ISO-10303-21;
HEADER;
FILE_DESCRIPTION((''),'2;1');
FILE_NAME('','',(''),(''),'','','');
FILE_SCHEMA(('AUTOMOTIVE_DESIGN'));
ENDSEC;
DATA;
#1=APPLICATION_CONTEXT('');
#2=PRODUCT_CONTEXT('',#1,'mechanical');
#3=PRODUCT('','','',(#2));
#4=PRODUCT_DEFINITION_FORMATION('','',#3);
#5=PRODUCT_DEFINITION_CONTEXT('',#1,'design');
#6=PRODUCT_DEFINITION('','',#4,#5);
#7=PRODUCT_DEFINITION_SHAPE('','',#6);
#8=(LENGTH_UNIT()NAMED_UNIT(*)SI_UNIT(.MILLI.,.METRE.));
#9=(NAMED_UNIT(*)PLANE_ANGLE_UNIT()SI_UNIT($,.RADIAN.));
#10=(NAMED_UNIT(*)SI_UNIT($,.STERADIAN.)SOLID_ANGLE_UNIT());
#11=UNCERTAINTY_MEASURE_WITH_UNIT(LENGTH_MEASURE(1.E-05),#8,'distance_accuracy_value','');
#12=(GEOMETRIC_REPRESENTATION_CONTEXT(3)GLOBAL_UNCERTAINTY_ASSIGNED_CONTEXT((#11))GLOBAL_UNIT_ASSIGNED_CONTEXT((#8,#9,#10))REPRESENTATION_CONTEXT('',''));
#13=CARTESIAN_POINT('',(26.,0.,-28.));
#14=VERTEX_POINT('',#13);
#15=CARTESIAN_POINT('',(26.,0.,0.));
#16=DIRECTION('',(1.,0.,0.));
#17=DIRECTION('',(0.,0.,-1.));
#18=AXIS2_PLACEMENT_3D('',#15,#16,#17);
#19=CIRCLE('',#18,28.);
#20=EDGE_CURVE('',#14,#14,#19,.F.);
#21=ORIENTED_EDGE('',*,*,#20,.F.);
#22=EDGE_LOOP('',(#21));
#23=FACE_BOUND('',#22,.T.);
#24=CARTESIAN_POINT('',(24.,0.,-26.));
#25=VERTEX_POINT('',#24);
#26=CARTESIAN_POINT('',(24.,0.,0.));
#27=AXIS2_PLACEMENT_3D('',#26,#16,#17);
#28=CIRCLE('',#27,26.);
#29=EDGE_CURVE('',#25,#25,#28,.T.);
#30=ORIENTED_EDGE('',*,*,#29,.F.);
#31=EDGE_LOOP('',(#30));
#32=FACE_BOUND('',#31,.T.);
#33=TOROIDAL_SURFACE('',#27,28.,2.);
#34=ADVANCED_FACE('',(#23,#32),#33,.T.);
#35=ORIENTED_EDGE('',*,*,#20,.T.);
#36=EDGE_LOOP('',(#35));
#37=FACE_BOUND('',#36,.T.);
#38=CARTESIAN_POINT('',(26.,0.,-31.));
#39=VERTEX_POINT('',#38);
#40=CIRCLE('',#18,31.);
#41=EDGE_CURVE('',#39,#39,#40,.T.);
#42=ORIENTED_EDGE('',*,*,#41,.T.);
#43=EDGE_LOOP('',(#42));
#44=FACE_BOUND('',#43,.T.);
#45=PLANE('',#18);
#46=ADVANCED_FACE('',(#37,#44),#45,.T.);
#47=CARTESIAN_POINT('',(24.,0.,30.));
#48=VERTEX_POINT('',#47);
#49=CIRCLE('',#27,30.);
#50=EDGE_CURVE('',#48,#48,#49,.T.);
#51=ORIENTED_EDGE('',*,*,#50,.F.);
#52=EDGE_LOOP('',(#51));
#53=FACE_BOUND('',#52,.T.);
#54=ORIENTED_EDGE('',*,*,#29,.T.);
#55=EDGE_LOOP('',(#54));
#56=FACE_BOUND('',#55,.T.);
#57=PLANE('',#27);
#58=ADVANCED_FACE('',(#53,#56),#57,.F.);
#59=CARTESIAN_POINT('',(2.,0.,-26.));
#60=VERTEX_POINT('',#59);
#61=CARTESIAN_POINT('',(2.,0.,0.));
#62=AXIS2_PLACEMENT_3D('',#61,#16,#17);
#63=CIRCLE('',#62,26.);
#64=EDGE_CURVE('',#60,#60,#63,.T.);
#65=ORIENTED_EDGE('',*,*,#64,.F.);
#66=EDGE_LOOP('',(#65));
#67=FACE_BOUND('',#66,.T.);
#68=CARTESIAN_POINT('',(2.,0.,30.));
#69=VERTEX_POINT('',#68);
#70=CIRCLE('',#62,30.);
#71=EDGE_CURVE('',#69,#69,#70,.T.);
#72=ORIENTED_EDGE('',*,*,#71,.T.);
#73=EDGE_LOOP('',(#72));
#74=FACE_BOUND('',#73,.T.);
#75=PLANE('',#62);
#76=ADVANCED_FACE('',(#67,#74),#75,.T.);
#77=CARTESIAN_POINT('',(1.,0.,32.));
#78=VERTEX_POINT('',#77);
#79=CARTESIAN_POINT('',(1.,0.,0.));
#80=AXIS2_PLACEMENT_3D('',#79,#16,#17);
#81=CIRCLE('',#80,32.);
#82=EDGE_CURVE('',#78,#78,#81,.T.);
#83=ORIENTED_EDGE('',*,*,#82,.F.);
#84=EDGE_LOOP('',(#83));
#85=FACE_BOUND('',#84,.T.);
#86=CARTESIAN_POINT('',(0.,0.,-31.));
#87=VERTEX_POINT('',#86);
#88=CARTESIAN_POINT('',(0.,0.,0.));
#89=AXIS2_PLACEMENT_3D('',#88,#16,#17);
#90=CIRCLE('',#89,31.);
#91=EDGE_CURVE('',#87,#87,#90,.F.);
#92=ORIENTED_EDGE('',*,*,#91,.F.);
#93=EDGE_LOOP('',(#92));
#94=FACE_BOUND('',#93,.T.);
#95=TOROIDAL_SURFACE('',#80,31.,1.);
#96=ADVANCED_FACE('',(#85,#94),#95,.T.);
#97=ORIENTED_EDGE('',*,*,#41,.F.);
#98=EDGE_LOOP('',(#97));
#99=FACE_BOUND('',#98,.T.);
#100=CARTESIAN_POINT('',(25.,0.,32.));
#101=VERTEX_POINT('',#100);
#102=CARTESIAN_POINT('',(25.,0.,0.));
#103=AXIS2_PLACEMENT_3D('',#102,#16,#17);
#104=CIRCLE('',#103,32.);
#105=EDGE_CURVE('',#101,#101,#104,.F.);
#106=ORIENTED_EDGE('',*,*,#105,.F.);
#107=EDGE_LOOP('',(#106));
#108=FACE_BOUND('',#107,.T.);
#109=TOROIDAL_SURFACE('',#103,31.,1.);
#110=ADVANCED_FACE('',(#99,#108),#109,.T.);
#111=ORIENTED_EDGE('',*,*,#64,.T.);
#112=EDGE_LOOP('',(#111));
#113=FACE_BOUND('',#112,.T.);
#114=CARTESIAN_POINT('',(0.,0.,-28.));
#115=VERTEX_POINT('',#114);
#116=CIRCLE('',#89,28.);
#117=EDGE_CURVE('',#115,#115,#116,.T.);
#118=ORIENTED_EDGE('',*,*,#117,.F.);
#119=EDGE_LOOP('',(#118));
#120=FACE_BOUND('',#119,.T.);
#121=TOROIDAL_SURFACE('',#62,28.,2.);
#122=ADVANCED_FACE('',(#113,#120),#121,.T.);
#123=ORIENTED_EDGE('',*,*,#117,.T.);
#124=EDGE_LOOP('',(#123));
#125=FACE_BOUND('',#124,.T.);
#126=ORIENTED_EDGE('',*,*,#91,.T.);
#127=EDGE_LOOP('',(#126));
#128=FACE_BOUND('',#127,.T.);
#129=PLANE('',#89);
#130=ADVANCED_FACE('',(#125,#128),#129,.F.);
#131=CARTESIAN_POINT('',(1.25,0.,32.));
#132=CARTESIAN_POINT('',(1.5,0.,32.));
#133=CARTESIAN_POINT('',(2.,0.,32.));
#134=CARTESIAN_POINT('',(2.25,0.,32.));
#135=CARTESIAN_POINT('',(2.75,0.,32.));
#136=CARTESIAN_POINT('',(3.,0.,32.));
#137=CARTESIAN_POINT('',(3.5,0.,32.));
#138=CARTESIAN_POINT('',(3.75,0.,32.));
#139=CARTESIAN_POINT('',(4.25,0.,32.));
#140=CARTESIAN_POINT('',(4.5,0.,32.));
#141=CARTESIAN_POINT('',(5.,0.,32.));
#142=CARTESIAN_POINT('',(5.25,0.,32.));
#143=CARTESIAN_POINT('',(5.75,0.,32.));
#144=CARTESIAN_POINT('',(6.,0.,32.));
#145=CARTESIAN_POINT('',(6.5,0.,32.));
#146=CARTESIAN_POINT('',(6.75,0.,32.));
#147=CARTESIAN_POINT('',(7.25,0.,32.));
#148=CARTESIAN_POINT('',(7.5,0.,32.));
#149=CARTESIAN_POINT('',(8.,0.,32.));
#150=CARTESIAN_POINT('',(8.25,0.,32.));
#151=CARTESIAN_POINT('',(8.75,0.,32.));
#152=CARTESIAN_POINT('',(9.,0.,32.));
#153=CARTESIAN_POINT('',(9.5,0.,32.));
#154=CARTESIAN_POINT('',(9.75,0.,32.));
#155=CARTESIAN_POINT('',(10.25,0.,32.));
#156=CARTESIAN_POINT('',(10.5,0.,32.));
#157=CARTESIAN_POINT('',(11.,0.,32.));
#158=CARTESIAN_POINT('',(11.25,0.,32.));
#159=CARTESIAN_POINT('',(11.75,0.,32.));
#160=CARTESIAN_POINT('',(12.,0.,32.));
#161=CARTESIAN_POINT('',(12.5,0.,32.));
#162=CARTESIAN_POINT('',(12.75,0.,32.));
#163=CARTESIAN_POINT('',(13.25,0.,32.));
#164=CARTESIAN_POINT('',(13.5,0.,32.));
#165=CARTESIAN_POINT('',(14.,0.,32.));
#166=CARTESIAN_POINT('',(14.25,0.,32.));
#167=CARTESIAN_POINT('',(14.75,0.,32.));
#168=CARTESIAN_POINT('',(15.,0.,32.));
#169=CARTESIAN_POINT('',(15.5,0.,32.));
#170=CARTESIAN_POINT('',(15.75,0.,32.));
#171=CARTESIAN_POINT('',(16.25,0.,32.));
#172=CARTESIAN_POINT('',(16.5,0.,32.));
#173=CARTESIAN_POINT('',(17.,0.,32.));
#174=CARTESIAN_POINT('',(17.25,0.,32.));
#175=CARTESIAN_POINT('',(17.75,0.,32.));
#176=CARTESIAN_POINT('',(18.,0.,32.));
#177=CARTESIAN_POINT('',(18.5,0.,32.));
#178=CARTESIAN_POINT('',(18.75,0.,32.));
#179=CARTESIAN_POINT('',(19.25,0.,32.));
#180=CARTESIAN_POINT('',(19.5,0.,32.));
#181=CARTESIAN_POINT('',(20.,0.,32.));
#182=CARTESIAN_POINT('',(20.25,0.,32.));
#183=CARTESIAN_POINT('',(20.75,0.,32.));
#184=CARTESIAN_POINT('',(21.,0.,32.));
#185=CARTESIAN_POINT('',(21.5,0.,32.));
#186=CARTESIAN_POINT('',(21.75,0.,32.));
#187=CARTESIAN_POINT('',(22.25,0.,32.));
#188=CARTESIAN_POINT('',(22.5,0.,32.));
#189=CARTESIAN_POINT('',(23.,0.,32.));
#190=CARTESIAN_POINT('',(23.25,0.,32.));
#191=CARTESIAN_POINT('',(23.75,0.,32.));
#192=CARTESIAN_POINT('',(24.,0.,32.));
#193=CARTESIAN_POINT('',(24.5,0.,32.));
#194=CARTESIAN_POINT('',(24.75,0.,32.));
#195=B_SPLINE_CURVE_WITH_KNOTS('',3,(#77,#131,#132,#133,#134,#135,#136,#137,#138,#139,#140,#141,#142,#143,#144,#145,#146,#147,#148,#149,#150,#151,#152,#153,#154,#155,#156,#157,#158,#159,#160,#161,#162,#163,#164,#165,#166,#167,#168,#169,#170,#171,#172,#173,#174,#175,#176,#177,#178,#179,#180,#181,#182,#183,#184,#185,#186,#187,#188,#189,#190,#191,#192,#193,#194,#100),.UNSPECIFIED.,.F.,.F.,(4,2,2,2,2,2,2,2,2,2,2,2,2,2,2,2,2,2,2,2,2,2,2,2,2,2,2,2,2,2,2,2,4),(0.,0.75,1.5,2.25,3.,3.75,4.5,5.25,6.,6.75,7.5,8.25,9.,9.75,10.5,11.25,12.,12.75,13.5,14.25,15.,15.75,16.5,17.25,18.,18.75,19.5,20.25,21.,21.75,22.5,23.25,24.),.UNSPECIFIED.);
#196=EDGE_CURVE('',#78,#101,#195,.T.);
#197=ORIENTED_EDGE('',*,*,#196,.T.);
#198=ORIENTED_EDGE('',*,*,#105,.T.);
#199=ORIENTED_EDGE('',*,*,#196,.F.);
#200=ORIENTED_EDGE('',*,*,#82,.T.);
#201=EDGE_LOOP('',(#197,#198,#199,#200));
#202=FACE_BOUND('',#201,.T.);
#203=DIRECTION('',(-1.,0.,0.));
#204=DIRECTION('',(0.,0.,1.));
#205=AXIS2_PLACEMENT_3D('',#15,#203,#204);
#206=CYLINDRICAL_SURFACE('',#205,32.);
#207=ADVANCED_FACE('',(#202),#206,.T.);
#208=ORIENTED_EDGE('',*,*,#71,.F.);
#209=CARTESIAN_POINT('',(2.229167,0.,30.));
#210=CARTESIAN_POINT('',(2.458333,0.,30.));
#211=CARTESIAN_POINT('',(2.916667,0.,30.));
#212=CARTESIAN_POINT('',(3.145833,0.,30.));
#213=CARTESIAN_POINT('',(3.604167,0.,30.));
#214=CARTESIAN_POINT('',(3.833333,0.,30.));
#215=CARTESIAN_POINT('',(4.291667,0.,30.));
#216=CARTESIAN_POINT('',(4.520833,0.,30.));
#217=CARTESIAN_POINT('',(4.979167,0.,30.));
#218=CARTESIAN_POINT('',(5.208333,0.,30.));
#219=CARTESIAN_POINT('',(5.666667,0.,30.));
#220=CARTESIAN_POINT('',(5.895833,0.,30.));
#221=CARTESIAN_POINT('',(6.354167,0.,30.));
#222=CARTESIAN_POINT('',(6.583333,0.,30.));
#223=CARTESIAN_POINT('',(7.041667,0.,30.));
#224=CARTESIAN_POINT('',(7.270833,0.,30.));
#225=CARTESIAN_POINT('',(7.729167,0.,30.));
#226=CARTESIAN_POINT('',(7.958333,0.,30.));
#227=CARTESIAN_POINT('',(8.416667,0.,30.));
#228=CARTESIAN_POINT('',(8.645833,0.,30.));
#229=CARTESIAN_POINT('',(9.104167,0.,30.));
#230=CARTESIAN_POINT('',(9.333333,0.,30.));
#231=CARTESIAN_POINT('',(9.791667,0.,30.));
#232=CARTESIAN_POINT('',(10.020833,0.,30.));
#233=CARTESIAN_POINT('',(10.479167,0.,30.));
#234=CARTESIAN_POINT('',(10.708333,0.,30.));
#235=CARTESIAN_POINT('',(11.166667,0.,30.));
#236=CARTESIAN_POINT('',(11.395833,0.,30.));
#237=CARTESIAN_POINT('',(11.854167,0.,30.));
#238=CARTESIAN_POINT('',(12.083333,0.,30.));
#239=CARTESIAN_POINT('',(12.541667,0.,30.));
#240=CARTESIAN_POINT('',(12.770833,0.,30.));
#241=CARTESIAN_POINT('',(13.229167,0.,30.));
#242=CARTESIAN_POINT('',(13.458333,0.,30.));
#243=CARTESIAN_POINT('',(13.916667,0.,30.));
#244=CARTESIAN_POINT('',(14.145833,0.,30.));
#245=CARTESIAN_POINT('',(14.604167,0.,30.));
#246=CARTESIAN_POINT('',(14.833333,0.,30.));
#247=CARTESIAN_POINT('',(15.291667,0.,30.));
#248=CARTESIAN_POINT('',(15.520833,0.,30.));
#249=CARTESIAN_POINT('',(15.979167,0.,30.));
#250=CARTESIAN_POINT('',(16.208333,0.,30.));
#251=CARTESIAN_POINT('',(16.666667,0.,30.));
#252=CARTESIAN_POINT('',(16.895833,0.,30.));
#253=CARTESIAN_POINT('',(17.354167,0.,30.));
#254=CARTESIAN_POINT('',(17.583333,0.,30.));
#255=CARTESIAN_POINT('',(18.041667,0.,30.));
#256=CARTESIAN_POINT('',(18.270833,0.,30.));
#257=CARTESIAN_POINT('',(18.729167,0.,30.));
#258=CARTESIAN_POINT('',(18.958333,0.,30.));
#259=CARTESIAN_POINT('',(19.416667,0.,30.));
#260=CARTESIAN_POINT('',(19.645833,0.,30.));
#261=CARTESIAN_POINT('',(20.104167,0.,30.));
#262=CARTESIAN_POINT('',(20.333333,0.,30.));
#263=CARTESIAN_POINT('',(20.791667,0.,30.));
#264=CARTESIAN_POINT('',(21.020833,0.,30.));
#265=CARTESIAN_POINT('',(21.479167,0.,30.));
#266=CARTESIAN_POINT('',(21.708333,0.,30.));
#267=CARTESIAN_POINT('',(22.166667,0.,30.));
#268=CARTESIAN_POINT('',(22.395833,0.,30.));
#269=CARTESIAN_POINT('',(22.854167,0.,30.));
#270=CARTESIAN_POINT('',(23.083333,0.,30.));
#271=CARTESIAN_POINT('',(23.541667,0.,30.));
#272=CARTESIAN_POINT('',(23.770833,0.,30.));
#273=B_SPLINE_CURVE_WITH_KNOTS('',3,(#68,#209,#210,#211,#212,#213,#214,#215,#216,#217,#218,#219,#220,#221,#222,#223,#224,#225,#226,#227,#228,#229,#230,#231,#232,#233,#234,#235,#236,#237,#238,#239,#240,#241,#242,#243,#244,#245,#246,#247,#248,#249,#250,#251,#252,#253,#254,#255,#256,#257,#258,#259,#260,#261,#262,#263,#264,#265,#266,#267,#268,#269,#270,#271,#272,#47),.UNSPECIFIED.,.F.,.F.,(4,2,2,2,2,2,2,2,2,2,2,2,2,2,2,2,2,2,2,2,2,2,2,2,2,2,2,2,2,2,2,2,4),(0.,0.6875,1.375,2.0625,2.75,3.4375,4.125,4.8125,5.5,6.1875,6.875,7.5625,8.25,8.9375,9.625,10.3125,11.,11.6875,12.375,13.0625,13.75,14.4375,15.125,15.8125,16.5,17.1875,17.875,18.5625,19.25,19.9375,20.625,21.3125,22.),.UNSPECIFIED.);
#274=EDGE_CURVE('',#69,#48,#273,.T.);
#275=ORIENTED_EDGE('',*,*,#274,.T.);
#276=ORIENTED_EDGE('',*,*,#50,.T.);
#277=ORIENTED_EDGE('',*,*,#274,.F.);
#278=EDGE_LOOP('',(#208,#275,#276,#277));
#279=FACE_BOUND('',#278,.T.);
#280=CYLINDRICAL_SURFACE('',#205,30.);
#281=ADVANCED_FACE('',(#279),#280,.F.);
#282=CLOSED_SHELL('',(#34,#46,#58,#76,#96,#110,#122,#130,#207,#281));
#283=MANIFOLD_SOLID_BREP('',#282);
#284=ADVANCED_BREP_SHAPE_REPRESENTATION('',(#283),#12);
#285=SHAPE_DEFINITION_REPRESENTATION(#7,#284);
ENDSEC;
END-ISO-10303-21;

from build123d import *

# Parameters (mm, degrees)
SKETCH1_R           = 32
SKETCH1_R_2         = 26
BOSS_EXTRUDE1_DEPTH = 26
FILLET1_R           = 1
FILLET2_R           = 2
SHELL1_START        = 2
SHELL1_OUTLINE_R    = 30
SHELL1_OUTLINE_R_2  = 26
SHELL1_DEPTH        = 22


# Read off the part's stored shape, not the designer's step: Shell1
with BuildPart() as part:
    # Sketch1 → Boss-Extrude1 (new body)
    with BuildSketch(Plane(origin=(0, 0, 0), x_dir=(0, 0, -1), z_dir=(1, 0, 0))):
        with Locations(Location((0, 0, 0), (0, 0, 180))):
            Circle(SKETCH1_R)
        with Locations(Location((0, 0, 0), (0, 0, 180))):
            Circle(SKETCH1_R_2, mode=Mode.SUBTRACT)
    extrude(amount=BOSS_EXTRUDE1_DEPTH)

    # Fillet1
    fillet1_edges = [part.edges().sort_by_distance(p)[0] for p in [
        (0, 0, -32),
        (26, 0, -32),
    ]]
    fillet(fillet1_edges, radius=FILLET1_R)

    # Fillet2
    fillet2_edges = [part.edges().sort_by_distance(p)[0] for p in [
        (0, 0, -26),
        (26, 0, -26),
    ]]
    fillet(fillet2_edges, radius=FILLET2_R)

    # Shell1 outline → Shell1 (cut)
    with BuildSketch(Plane.YZ.offset(SHELL1_START)):
        Circle(SHELL1_OUTLINE_R)
        Circle(SHELL1_OUTLINE_R_2, mode=Mode.SUBTRACT)
    extrude(amount=SHELL1_DEPTH, mode=Mode.SUBTRACT)


solid = part.part
